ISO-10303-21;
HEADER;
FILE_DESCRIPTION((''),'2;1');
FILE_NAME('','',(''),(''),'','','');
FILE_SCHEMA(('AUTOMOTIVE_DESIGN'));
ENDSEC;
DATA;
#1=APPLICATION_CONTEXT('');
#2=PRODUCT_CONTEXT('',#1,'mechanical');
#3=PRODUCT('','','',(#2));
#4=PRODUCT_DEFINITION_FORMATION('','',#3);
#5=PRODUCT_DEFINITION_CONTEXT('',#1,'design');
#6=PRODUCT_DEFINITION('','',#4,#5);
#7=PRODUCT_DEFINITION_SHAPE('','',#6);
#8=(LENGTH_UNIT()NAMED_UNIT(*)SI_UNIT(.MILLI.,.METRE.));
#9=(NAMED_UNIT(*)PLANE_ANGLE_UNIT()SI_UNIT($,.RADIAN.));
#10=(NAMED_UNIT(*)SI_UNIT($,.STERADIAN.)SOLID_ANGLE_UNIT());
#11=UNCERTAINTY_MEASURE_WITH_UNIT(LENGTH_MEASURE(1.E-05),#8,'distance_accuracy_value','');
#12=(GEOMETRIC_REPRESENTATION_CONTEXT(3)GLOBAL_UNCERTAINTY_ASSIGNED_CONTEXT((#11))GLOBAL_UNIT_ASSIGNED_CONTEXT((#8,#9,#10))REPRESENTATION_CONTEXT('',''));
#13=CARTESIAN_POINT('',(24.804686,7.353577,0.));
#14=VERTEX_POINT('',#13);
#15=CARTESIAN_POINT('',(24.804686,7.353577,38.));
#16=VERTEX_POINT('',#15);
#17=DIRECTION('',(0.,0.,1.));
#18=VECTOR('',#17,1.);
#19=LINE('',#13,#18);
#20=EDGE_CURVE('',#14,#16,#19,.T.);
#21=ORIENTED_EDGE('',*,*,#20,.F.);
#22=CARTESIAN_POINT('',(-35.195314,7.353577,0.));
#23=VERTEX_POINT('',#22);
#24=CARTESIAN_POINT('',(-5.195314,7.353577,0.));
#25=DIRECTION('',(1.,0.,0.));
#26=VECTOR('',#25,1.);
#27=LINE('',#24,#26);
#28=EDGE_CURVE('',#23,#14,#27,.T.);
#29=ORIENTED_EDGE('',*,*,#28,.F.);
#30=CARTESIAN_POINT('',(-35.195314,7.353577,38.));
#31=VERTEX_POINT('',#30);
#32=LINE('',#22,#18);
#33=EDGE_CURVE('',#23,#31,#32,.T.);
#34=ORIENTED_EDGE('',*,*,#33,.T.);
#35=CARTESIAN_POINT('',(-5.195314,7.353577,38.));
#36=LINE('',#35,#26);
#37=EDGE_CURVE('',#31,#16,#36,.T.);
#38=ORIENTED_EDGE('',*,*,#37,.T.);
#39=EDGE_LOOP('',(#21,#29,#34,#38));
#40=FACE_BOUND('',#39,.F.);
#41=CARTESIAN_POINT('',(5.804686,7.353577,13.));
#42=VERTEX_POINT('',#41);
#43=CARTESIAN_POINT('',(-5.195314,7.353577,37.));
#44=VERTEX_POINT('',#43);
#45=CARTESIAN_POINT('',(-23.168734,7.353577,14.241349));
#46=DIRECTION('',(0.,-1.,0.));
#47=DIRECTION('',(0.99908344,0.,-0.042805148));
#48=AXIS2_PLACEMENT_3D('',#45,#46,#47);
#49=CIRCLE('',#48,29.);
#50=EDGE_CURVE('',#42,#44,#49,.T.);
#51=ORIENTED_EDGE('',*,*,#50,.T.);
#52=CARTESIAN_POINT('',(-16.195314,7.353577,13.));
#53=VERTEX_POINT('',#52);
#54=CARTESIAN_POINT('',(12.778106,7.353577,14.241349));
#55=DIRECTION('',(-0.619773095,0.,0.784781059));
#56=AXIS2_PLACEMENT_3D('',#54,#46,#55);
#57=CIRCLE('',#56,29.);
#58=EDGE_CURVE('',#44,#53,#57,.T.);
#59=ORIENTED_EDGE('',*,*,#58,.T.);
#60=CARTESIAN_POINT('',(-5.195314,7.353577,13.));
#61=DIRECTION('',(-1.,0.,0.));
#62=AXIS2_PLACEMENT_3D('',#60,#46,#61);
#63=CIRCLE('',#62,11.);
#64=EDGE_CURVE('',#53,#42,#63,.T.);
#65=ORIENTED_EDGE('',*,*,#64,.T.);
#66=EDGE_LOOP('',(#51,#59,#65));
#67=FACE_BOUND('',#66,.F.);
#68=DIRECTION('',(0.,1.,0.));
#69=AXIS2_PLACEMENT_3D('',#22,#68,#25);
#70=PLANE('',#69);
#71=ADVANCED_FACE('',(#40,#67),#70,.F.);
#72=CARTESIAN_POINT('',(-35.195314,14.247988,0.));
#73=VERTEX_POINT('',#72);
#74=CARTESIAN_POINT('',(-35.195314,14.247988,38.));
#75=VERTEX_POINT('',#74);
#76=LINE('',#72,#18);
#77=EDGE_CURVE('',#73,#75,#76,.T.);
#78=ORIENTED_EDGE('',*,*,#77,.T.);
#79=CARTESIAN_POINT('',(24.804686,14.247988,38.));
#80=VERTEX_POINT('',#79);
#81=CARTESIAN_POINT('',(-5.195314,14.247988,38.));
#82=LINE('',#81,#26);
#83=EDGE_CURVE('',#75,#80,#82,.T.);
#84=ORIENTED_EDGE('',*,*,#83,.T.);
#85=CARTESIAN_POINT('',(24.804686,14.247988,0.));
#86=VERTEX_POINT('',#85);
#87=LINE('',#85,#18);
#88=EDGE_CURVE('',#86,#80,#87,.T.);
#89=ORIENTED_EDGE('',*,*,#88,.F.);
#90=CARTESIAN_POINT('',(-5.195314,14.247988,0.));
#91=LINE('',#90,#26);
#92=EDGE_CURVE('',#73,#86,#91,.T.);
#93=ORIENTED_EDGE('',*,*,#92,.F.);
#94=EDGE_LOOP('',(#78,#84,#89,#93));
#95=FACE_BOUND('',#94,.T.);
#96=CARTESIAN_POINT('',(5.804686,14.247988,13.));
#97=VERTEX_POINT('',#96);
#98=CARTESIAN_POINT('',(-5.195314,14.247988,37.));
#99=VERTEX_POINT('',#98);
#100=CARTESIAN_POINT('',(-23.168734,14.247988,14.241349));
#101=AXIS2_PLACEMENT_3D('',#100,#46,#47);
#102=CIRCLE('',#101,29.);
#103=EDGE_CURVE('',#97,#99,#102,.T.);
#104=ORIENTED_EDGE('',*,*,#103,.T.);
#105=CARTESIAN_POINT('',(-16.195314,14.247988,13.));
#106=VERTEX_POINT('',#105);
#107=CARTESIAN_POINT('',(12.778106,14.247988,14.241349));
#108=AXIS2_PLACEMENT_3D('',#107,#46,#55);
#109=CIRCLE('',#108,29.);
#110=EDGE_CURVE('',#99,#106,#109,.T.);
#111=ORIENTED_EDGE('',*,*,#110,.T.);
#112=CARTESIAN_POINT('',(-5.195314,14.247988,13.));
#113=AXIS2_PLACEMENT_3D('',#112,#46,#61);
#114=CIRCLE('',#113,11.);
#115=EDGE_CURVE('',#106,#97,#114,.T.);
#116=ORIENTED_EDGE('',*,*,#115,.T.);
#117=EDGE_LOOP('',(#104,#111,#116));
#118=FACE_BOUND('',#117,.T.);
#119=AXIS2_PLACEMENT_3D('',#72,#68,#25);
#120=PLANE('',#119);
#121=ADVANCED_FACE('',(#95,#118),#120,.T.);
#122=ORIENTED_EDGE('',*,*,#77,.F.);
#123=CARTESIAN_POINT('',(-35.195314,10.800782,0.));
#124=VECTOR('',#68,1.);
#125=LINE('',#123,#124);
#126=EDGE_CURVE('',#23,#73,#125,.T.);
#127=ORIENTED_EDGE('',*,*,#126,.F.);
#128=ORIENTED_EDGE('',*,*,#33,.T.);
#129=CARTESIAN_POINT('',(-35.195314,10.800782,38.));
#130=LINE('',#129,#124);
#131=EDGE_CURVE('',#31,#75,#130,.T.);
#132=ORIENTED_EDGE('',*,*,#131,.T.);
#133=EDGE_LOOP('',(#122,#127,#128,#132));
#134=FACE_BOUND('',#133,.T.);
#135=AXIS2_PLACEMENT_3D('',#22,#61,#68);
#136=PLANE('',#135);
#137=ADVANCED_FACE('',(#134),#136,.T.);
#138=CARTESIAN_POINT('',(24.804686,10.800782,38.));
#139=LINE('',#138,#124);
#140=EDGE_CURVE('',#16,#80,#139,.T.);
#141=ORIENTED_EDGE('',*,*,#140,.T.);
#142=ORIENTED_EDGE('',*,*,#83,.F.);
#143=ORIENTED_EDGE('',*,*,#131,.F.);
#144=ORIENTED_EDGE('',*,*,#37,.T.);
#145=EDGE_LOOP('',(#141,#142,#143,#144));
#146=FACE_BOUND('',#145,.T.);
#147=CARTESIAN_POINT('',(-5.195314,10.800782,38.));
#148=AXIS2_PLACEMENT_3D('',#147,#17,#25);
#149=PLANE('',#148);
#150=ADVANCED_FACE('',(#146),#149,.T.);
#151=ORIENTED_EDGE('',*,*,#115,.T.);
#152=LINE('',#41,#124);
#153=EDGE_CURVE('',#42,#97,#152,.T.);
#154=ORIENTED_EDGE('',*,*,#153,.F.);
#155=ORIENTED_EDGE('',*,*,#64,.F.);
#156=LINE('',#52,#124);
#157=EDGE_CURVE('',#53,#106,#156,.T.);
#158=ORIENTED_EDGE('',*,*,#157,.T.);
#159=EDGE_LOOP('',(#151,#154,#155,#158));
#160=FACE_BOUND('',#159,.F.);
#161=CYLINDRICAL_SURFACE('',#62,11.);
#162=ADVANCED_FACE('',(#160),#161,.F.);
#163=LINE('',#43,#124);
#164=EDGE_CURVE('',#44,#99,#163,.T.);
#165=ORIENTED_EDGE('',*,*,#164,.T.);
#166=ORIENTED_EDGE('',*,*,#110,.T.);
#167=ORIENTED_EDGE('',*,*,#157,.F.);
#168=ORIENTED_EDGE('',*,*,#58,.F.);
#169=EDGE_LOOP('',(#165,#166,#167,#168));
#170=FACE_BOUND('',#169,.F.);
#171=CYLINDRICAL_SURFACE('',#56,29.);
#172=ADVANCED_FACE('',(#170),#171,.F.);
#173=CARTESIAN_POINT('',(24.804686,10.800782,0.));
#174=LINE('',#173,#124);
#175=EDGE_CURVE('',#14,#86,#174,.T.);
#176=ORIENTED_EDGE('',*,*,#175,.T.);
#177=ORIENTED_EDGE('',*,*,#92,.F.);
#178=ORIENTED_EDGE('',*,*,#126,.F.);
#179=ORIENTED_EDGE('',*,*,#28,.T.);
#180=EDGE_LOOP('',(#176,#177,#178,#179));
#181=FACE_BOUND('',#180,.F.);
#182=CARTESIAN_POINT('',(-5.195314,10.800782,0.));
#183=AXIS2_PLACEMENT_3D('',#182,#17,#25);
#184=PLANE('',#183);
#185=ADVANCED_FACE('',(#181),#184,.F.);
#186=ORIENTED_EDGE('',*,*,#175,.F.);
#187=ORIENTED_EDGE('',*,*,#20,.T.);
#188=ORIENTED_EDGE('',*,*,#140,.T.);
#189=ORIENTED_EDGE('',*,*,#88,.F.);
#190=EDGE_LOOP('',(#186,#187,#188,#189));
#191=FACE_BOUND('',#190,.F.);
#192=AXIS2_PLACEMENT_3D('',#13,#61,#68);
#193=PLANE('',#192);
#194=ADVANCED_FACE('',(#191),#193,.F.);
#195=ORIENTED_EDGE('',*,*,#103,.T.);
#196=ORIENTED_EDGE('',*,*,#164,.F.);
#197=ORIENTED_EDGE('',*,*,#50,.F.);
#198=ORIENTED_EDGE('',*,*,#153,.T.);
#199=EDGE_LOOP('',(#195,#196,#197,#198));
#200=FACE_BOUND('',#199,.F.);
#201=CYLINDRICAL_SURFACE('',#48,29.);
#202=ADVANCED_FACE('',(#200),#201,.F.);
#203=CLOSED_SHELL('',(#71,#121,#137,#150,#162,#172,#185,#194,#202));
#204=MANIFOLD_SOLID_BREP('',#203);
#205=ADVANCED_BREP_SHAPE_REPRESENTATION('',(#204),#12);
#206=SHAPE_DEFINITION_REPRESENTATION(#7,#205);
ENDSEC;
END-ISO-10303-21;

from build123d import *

# Parameters (mm, degrees)
F0_W     = 60
F0_H     = 6.8944109904
F1_DEPTH = 38
F3_DEPTH = 25


with BuildPart() as f1:
    # F0 (on Top) → F1 (new body)
    with BuildSketch(Plane.XY):
        with Locations((-5.1953140646, 10.8007821254)):
            Rectangle(F0_W, F0_H)
    extrude(amount=F1_DEPTH)

    # F2 (on face) → F3 (cut)
    with BuildSketch(Plane.XZ.offset(-7.3535766302)):
        with BuildLine():
            ThreePointArc((-5.1953140646, 37), (-13.5847741794, 26.3243358859), (-16.1953140646, 13))
            ThreePointArc((-16.1953140646, 13), (-5.1953140646, 2), (5.8046859354, 13))
            ThreePointArc((5.8046859354, 13), (3.1941460502, 26.3243358859), (-5.1953140646, 37))
        make_face()
    extrude(amount=-F3_DEPTH, mode=Mode.SUBTRACT)


solid = f1.part
